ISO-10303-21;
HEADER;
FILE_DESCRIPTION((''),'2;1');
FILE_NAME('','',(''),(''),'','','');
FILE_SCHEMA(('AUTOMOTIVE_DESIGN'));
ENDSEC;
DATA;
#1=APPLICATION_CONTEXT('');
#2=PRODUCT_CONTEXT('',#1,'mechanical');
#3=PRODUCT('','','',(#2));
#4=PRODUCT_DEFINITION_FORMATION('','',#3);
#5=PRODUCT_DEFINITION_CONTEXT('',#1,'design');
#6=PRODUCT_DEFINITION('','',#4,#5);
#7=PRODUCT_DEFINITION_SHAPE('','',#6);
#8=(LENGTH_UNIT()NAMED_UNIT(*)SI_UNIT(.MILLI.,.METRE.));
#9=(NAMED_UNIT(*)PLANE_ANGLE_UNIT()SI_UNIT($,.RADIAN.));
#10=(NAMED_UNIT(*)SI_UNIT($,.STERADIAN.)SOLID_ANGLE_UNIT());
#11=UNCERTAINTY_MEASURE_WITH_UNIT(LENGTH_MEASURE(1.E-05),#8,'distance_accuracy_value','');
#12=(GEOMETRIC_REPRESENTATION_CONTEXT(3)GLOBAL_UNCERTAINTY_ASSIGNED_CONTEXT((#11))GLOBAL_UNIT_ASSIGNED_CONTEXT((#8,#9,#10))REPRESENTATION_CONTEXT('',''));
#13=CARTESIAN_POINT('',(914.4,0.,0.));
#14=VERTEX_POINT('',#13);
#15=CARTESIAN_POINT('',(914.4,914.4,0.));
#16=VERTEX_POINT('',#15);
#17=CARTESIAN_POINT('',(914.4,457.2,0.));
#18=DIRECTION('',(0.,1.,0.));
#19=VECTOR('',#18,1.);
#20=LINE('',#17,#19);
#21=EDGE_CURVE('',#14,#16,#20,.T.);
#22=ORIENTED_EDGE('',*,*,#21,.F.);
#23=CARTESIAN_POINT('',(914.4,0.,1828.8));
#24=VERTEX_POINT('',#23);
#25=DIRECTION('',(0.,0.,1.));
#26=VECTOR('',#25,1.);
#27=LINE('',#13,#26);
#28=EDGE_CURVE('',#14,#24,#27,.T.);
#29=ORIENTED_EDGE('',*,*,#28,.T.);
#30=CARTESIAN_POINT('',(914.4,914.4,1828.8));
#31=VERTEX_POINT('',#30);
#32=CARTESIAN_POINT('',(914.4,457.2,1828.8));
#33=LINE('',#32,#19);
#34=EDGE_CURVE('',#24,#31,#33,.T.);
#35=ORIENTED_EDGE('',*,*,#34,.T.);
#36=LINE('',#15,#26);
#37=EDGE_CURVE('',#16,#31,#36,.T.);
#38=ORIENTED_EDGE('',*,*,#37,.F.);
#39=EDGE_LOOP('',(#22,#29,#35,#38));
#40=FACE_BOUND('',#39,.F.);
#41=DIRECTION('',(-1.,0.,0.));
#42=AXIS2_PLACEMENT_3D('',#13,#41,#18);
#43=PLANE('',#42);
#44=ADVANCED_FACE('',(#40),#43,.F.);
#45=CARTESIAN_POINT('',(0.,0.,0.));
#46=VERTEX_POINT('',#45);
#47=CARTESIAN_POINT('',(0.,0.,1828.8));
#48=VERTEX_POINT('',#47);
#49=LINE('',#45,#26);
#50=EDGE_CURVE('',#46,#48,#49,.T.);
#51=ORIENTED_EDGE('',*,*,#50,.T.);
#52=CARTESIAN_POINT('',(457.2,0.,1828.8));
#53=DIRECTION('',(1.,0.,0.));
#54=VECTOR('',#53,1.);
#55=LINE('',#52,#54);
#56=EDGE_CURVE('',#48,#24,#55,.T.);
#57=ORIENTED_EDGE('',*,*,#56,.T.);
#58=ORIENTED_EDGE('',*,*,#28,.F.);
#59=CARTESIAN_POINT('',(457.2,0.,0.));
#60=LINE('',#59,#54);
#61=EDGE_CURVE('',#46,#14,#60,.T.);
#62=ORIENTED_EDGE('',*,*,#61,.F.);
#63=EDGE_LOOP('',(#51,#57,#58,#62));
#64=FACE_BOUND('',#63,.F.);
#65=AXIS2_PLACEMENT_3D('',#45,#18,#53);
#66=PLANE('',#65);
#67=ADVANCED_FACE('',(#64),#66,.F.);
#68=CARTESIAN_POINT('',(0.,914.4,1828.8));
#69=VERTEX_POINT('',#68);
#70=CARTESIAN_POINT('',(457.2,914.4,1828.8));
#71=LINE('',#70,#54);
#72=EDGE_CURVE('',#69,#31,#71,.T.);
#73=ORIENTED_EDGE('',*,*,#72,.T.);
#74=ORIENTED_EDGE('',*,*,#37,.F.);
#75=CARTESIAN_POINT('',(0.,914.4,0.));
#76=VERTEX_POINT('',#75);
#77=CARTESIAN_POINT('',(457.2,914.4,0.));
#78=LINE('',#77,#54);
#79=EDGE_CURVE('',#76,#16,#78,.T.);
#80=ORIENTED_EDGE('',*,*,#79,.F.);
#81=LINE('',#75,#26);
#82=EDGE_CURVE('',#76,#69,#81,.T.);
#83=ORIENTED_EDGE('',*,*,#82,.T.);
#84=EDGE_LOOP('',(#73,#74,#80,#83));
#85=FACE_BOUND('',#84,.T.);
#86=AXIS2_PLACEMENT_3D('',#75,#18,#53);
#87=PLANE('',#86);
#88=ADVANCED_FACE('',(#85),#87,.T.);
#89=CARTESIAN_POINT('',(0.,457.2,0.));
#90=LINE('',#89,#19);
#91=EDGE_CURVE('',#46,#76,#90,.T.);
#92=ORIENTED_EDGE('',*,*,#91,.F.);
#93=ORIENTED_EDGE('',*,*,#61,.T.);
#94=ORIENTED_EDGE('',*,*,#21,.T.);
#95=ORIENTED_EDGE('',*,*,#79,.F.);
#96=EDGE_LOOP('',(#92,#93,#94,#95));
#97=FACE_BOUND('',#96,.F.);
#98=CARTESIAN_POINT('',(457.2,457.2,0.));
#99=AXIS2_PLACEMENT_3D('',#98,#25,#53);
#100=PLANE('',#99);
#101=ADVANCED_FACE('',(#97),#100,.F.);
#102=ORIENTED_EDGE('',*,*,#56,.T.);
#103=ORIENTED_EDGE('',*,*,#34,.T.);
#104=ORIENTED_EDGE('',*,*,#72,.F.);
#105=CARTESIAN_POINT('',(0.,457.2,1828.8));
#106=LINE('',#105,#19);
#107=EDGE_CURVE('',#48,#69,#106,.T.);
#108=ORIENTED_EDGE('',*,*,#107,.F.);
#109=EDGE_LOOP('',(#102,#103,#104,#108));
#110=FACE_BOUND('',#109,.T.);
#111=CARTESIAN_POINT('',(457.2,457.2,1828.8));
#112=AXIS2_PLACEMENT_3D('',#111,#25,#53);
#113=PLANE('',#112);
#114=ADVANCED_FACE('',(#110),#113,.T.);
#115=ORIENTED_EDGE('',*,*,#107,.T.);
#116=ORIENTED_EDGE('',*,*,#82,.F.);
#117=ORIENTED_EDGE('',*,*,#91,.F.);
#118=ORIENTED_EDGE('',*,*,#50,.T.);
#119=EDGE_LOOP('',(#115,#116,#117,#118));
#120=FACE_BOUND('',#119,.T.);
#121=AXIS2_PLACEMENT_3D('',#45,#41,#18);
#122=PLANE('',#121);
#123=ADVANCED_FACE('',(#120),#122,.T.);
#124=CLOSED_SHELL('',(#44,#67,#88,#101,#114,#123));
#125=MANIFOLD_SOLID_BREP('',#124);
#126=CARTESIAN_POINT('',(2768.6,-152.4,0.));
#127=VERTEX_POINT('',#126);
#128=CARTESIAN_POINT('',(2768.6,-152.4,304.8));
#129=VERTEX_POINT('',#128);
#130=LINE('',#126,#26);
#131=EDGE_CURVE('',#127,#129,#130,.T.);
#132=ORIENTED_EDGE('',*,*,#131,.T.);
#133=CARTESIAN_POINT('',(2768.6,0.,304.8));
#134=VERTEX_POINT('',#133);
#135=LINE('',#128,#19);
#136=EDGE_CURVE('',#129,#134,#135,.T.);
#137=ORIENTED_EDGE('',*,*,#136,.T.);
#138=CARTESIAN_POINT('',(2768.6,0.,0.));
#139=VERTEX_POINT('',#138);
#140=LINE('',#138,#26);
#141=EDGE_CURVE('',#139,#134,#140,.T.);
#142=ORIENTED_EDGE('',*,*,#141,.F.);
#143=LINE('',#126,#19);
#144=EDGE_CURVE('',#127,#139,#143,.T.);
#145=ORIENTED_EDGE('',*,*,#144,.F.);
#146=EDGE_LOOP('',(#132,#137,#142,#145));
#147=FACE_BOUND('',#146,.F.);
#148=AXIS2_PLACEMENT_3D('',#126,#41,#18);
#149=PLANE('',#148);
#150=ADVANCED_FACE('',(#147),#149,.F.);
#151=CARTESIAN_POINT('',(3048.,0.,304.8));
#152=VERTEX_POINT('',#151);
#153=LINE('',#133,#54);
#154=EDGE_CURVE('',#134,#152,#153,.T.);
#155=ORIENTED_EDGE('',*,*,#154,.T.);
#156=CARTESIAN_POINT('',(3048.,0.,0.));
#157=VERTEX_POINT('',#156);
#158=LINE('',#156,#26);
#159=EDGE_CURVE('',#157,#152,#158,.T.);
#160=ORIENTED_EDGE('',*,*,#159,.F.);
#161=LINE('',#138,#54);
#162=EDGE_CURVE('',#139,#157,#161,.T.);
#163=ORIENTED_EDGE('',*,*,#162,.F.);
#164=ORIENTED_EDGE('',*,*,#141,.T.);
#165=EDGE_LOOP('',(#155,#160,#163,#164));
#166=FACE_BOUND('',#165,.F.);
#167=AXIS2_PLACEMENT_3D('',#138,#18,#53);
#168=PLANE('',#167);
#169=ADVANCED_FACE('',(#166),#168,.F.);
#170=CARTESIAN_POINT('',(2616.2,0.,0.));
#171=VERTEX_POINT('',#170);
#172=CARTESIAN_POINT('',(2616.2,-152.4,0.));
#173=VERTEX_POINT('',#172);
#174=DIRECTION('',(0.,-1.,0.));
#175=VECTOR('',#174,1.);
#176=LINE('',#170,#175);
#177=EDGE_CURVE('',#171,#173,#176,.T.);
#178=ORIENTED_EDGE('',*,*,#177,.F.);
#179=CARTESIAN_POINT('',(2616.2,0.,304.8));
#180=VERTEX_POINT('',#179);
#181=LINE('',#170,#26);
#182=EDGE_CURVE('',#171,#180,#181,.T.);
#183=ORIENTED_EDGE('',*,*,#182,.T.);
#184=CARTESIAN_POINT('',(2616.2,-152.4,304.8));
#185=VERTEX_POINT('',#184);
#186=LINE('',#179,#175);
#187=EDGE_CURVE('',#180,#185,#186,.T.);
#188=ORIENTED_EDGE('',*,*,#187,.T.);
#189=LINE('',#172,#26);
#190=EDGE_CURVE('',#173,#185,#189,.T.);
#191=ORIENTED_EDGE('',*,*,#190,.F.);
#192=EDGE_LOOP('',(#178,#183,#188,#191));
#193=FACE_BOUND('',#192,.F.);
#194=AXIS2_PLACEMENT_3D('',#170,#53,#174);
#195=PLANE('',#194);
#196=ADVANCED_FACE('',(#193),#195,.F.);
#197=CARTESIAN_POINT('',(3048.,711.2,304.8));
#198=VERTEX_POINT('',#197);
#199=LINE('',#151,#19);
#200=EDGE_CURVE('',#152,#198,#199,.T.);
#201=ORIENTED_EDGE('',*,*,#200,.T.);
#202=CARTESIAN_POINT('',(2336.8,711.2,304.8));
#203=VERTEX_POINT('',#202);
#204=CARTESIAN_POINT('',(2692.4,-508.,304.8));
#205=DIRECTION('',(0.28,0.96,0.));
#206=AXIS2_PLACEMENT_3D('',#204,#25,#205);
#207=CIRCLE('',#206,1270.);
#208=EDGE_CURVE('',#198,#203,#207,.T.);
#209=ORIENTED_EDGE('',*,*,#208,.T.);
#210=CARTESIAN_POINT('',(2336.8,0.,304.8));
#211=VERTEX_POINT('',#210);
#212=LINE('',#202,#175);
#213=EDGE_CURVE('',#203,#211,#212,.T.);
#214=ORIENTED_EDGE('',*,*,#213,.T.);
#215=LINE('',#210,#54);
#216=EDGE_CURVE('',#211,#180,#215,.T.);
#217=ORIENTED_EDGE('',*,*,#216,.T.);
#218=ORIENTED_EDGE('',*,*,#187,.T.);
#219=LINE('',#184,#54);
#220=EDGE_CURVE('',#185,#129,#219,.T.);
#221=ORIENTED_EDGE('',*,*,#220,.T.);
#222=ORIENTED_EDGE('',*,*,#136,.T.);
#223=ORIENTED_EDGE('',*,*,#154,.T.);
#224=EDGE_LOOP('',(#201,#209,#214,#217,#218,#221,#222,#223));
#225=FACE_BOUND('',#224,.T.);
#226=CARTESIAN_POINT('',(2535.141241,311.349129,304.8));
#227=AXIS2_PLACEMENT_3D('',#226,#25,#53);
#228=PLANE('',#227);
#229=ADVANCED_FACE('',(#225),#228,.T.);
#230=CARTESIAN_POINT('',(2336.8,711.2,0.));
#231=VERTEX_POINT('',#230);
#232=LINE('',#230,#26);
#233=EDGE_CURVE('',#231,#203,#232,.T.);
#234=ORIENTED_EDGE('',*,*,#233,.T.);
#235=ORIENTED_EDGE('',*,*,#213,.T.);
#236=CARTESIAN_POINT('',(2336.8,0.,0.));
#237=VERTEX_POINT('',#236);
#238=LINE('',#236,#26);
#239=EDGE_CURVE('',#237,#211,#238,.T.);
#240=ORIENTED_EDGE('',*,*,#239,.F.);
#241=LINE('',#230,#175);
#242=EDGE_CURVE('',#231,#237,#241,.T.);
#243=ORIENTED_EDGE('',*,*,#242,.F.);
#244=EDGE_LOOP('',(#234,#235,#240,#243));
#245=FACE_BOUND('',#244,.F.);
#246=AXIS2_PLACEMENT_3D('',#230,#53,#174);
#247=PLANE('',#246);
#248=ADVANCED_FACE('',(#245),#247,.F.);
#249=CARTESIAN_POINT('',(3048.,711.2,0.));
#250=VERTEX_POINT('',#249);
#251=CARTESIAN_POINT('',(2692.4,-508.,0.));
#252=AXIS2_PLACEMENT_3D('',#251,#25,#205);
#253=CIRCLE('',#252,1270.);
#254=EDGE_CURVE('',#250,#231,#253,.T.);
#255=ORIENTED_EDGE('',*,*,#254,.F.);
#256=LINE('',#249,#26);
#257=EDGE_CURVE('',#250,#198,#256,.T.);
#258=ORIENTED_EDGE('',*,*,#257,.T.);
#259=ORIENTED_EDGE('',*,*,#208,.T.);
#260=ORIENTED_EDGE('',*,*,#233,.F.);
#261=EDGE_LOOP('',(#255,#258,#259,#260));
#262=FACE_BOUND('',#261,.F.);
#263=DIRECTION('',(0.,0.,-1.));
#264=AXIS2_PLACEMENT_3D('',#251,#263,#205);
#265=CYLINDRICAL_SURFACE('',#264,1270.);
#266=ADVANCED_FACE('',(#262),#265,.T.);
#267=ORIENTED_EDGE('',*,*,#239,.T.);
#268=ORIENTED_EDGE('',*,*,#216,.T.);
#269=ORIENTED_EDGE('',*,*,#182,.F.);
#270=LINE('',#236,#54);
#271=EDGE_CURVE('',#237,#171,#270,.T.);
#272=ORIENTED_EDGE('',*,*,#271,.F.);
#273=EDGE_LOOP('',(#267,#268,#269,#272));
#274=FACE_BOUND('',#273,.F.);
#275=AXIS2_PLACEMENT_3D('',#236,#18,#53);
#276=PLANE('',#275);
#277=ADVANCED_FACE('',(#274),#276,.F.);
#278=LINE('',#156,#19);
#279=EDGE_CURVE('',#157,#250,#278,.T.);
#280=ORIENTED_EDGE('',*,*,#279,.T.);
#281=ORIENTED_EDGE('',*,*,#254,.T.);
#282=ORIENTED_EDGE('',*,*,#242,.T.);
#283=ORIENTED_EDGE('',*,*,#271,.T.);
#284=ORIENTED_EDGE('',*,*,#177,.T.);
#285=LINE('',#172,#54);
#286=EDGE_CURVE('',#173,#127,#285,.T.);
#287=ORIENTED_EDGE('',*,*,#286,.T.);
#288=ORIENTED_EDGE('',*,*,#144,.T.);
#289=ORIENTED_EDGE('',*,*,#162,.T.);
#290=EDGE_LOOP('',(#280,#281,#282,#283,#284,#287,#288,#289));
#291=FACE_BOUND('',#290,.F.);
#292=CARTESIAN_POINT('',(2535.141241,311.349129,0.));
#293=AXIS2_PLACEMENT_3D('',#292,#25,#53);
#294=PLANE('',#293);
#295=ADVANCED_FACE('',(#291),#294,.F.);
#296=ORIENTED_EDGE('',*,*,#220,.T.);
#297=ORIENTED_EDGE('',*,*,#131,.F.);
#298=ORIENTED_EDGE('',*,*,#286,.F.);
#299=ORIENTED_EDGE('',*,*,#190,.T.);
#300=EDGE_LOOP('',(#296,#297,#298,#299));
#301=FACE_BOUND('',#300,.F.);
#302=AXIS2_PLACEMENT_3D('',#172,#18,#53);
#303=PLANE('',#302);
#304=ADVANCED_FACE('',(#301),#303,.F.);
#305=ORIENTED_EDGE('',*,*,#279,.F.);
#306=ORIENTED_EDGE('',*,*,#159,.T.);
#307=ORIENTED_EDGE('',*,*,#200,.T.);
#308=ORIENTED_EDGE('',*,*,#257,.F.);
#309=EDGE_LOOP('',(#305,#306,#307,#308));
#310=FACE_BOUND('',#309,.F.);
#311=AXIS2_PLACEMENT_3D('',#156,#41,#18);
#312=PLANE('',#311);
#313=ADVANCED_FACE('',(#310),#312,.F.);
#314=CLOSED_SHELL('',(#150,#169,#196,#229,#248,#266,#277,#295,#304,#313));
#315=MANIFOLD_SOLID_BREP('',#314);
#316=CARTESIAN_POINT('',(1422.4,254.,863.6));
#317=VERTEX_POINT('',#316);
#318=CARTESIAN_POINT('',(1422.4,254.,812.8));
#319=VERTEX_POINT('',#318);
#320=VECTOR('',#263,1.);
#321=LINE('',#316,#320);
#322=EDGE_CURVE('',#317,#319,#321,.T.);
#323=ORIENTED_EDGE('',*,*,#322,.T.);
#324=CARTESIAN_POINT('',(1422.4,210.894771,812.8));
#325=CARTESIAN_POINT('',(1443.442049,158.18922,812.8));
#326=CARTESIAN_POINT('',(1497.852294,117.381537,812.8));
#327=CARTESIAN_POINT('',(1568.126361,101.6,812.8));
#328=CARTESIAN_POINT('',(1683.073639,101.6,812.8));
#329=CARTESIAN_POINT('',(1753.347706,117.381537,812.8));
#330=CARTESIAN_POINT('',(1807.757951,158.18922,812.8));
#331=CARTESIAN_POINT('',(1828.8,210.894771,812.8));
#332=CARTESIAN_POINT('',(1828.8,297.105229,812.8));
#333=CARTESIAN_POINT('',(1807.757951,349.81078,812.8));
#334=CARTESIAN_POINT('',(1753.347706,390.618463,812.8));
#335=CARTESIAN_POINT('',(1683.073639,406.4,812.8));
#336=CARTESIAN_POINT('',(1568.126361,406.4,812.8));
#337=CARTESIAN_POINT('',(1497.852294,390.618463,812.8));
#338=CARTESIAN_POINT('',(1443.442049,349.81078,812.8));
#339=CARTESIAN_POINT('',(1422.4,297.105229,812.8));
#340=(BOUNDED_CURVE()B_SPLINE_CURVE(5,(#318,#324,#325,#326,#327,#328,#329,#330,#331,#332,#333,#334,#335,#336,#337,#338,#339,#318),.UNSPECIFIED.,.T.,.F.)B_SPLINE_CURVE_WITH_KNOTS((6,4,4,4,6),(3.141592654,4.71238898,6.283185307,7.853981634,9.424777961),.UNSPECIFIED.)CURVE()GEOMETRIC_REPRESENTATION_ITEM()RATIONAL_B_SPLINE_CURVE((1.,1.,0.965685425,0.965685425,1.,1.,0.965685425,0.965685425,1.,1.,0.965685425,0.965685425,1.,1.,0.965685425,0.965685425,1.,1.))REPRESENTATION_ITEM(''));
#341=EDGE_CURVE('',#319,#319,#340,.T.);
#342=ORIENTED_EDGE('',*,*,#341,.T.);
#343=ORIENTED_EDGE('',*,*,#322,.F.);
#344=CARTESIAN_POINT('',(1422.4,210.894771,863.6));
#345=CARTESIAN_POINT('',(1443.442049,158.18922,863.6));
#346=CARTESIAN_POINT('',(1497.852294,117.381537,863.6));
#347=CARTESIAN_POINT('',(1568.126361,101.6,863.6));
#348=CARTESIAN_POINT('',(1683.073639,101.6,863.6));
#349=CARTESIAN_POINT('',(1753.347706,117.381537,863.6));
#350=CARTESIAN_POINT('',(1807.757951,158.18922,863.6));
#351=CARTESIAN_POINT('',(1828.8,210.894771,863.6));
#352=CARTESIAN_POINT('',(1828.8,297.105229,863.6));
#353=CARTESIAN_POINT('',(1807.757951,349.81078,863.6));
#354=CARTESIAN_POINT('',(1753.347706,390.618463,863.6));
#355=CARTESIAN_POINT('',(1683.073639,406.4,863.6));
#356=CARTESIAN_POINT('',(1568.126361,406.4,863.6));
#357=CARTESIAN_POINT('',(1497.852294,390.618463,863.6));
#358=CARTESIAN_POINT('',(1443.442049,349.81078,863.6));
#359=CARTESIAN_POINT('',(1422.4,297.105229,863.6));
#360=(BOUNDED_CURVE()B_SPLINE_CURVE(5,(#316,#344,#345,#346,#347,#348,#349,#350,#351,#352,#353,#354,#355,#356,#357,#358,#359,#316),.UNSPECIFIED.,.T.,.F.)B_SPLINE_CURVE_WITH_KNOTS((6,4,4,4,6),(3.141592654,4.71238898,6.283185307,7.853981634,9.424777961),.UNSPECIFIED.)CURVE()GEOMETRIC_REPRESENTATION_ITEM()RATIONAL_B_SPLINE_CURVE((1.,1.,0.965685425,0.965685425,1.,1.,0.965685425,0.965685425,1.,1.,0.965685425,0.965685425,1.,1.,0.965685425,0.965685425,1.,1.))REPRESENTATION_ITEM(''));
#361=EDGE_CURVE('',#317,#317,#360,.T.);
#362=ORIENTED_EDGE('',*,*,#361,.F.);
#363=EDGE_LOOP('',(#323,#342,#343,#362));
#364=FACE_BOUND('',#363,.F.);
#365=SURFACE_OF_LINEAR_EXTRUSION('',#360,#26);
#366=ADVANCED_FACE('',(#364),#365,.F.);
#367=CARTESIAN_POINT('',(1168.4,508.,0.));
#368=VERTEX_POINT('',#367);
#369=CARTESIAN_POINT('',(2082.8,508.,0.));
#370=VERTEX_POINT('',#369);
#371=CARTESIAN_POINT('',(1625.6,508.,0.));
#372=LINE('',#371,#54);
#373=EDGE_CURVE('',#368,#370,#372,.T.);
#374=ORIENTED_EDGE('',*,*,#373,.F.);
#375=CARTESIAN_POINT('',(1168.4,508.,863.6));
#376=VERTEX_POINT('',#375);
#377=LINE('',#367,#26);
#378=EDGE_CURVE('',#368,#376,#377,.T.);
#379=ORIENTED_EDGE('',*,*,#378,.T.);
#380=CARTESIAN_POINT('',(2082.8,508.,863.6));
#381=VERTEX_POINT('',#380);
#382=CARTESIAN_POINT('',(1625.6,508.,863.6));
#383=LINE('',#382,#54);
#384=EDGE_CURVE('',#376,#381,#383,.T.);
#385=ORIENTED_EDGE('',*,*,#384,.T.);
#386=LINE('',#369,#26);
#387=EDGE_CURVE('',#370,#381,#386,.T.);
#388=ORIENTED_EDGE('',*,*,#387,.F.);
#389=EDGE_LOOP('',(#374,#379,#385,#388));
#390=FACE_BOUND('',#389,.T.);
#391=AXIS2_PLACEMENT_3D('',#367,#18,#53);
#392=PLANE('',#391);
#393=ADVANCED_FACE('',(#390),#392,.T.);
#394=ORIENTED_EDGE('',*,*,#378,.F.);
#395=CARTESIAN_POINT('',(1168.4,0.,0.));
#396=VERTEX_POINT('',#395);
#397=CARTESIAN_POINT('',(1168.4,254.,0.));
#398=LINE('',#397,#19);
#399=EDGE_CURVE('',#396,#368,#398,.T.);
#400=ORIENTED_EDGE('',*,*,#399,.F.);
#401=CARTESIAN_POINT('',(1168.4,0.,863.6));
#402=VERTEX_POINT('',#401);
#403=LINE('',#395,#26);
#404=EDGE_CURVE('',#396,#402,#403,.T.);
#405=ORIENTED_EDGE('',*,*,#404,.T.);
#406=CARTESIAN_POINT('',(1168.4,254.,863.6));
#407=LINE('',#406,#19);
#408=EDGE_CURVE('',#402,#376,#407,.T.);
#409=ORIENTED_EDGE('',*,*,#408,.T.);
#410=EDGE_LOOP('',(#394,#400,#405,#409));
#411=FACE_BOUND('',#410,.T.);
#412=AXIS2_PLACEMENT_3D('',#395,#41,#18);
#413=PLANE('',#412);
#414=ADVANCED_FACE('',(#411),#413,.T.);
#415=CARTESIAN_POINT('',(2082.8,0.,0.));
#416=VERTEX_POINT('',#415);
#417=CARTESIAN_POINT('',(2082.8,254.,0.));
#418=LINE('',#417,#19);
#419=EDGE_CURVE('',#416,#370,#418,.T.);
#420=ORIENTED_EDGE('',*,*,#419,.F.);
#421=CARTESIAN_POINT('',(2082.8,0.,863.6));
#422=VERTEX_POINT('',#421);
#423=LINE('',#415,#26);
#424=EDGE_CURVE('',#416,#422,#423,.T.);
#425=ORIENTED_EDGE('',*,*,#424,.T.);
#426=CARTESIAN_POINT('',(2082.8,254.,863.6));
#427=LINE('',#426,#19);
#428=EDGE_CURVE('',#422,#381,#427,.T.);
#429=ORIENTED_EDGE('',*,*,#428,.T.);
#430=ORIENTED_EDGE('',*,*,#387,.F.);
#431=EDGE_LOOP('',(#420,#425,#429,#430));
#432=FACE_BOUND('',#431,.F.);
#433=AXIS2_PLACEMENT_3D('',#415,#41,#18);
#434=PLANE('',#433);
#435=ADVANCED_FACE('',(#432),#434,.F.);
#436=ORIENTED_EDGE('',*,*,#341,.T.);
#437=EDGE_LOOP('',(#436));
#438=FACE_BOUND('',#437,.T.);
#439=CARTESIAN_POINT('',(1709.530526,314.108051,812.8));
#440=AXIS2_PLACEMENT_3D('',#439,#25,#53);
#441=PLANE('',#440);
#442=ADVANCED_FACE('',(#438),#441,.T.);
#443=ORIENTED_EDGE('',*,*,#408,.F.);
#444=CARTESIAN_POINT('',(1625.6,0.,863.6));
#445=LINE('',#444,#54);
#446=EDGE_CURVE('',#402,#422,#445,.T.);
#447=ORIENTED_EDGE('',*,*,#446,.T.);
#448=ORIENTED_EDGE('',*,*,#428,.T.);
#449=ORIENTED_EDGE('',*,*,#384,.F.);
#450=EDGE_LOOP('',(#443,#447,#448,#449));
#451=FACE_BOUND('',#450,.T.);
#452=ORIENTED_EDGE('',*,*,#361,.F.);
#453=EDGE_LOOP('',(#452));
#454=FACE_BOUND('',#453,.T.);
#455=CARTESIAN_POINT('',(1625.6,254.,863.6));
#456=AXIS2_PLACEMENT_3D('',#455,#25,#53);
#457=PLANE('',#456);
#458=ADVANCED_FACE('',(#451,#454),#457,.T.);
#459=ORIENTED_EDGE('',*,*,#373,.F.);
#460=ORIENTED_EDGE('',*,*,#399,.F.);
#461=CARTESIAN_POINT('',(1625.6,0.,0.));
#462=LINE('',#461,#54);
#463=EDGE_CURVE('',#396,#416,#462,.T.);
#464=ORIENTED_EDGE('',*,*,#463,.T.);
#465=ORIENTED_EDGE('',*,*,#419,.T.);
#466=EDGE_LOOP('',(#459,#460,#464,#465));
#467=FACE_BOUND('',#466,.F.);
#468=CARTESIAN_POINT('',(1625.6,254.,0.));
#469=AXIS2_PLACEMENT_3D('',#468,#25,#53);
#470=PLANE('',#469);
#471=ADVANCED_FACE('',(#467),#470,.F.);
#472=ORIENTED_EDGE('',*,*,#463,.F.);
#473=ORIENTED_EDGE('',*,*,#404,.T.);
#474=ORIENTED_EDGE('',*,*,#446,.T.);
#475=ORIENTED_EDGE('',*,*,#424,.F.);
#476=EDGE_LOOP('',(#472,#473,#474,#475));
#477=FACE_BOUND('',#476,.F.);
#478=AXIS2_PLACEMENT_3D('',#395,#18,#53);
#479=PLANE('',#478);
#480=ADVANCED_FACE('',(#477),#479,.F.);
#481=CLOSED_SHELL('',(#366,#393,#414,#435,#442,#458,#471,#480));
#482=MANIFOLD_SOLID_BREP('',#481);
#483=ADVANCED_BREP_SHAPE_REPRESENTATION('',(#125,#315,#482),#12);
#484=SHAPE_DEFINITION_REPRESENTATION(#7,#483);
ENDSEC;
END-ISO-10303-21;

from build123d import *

# Parameters (mm, degrees)
F0_W     = 914.4
F0_H     = 914.4
F1_DEPTH = 1828.8
F2_W     = 914.4
F2_H     = 508
F3_DEPTH = 863.6
F5_DEPTH = 50.8
F7_DEPTH = 304.8


# Not quite as in the source:
# - a feature of the source that left no trace in its solid (it failed there, or was rolled back) is left out


with BuildPart() as f1:
    # F0 (on Top) → F1 (new body)
    with BuildSketch(Plane.XY):
        with Locations((457.2, 457.2)):
            Rectangle(F0_W, F0_H)
    extrude(amount=F1_DEPTH)


with BuildPart() as f3:
    # F2 (on Top) → F3 (new body)
    with BuildSketch(Plane.XY):
        with Locations((1625.6, 254)):
            Rectangle(F2_W, F2_H)
    extrude(amount=F3_DEPTH)

    # F4 (on face) → F5 (cut)
    with BuildSketch(Plane.XY.offset(863.6)):
        with BuildLine():
            add(Edge.make_bspline(
                [(1828.8, 254), (1828.8, 406.4), (1625.6, 406.4)],
                knots=[0, 0, 0, 1.5707963268, 1.5707963268, 1.5707963268], degree=2, weights=[1, 0.7071067812, 1]))
            Line((1625.6, 406.4), (1625.6, 254))
            Line((1625.6, 254), (1828.8, 254))
        make_face()
        with BuildLine():
            Line((1625.6, 254), (1625.6, 406.4))
            add(Edge.make_bspline(
                [(1625.6, 406.4), (1422.4, 406.4), (1422.4, 254)],
                knots=[1.5707963268, 1.5707963268, 1.5707963268, 3.1415926536, 3.1415926536, 3.1415926536], degree=2, weights=[1, 0.7071067812, 1]))
            Line((1422.4, 254), (1625.6, 254))
        make_face()
        with BuildLine():
            Line((1828.8, 254), (1625.6, 254))
            Line((1625.6, 254), (1625.6, 101.6))
            add(Edge.make_bspline(
                [(1625.6, 101.6), (1828.8, 101.6), (1828.8, 254)],
                knots=[4.7123889804, 4.7123889804, 4.7123889804, 6.2831853072, 6.2831853072, 6.2831853072], degree=2, weights=[1, 0.7071067812, 1]))
        make_face()
        with BuildLine():
            Line((1625.6, 101.6), (1625.6, 254))
            Line((1625.6, 254), (1422.4, 254))
            add(Edge.make_bspline(
                [(1422.4, 254), (1422.4, 101.6), (1625.6, 101.6)],
                knots=[3.1415926536, 3.1415926536, 3.1415926536, 4.7123889804, 4.7123889804, 4.7123889804], degree=2, weights=[1, 0.7071067812, 1]))
        make_face()
    extrude(amount=-F5_DEPTH, mode=Mode.SUBTRACT)


with BuildPart() as f7:
    # F6 (on Top) → F7 (new body)
    with BuildSketch(Plane.XY):
        with BuildLine():
            Line((2336.8, 711.2), (2336.8, 0))
            Line((2336.8, 0), (2616.2, 0))
            Line((2616.2, 0), (2616.2, -152.4))
            Line((2616.2, -152.4), (2692.4, -152.4))
            Line((2692.4, -152.4), (2692.4, 762))
            ThreePointArc((2692.4, 762), (2512.7948775786, 749.2358569497), (2336.8, 711.2))
        make_face()
        with BuildLine():
            ThreePointArc((3048, 711.2), (2872.0051224214, 749.2358569497), (2692.4, 762))
            Line((2692.4, 762), (2692.4, -152.4))
            Line((2692.4, -152.4), (2768.6, -152.4))
            Line((2768.6, -152.4), (2768.6, 0))
            Line((2768.6, 0), (3048, 0))
            Line((3048, 0), (3048, 711.2))
        make_face()
    extrude(amount=F7_DEPTH)


solid = Compound([f1.part, f3.part, f7.part])
